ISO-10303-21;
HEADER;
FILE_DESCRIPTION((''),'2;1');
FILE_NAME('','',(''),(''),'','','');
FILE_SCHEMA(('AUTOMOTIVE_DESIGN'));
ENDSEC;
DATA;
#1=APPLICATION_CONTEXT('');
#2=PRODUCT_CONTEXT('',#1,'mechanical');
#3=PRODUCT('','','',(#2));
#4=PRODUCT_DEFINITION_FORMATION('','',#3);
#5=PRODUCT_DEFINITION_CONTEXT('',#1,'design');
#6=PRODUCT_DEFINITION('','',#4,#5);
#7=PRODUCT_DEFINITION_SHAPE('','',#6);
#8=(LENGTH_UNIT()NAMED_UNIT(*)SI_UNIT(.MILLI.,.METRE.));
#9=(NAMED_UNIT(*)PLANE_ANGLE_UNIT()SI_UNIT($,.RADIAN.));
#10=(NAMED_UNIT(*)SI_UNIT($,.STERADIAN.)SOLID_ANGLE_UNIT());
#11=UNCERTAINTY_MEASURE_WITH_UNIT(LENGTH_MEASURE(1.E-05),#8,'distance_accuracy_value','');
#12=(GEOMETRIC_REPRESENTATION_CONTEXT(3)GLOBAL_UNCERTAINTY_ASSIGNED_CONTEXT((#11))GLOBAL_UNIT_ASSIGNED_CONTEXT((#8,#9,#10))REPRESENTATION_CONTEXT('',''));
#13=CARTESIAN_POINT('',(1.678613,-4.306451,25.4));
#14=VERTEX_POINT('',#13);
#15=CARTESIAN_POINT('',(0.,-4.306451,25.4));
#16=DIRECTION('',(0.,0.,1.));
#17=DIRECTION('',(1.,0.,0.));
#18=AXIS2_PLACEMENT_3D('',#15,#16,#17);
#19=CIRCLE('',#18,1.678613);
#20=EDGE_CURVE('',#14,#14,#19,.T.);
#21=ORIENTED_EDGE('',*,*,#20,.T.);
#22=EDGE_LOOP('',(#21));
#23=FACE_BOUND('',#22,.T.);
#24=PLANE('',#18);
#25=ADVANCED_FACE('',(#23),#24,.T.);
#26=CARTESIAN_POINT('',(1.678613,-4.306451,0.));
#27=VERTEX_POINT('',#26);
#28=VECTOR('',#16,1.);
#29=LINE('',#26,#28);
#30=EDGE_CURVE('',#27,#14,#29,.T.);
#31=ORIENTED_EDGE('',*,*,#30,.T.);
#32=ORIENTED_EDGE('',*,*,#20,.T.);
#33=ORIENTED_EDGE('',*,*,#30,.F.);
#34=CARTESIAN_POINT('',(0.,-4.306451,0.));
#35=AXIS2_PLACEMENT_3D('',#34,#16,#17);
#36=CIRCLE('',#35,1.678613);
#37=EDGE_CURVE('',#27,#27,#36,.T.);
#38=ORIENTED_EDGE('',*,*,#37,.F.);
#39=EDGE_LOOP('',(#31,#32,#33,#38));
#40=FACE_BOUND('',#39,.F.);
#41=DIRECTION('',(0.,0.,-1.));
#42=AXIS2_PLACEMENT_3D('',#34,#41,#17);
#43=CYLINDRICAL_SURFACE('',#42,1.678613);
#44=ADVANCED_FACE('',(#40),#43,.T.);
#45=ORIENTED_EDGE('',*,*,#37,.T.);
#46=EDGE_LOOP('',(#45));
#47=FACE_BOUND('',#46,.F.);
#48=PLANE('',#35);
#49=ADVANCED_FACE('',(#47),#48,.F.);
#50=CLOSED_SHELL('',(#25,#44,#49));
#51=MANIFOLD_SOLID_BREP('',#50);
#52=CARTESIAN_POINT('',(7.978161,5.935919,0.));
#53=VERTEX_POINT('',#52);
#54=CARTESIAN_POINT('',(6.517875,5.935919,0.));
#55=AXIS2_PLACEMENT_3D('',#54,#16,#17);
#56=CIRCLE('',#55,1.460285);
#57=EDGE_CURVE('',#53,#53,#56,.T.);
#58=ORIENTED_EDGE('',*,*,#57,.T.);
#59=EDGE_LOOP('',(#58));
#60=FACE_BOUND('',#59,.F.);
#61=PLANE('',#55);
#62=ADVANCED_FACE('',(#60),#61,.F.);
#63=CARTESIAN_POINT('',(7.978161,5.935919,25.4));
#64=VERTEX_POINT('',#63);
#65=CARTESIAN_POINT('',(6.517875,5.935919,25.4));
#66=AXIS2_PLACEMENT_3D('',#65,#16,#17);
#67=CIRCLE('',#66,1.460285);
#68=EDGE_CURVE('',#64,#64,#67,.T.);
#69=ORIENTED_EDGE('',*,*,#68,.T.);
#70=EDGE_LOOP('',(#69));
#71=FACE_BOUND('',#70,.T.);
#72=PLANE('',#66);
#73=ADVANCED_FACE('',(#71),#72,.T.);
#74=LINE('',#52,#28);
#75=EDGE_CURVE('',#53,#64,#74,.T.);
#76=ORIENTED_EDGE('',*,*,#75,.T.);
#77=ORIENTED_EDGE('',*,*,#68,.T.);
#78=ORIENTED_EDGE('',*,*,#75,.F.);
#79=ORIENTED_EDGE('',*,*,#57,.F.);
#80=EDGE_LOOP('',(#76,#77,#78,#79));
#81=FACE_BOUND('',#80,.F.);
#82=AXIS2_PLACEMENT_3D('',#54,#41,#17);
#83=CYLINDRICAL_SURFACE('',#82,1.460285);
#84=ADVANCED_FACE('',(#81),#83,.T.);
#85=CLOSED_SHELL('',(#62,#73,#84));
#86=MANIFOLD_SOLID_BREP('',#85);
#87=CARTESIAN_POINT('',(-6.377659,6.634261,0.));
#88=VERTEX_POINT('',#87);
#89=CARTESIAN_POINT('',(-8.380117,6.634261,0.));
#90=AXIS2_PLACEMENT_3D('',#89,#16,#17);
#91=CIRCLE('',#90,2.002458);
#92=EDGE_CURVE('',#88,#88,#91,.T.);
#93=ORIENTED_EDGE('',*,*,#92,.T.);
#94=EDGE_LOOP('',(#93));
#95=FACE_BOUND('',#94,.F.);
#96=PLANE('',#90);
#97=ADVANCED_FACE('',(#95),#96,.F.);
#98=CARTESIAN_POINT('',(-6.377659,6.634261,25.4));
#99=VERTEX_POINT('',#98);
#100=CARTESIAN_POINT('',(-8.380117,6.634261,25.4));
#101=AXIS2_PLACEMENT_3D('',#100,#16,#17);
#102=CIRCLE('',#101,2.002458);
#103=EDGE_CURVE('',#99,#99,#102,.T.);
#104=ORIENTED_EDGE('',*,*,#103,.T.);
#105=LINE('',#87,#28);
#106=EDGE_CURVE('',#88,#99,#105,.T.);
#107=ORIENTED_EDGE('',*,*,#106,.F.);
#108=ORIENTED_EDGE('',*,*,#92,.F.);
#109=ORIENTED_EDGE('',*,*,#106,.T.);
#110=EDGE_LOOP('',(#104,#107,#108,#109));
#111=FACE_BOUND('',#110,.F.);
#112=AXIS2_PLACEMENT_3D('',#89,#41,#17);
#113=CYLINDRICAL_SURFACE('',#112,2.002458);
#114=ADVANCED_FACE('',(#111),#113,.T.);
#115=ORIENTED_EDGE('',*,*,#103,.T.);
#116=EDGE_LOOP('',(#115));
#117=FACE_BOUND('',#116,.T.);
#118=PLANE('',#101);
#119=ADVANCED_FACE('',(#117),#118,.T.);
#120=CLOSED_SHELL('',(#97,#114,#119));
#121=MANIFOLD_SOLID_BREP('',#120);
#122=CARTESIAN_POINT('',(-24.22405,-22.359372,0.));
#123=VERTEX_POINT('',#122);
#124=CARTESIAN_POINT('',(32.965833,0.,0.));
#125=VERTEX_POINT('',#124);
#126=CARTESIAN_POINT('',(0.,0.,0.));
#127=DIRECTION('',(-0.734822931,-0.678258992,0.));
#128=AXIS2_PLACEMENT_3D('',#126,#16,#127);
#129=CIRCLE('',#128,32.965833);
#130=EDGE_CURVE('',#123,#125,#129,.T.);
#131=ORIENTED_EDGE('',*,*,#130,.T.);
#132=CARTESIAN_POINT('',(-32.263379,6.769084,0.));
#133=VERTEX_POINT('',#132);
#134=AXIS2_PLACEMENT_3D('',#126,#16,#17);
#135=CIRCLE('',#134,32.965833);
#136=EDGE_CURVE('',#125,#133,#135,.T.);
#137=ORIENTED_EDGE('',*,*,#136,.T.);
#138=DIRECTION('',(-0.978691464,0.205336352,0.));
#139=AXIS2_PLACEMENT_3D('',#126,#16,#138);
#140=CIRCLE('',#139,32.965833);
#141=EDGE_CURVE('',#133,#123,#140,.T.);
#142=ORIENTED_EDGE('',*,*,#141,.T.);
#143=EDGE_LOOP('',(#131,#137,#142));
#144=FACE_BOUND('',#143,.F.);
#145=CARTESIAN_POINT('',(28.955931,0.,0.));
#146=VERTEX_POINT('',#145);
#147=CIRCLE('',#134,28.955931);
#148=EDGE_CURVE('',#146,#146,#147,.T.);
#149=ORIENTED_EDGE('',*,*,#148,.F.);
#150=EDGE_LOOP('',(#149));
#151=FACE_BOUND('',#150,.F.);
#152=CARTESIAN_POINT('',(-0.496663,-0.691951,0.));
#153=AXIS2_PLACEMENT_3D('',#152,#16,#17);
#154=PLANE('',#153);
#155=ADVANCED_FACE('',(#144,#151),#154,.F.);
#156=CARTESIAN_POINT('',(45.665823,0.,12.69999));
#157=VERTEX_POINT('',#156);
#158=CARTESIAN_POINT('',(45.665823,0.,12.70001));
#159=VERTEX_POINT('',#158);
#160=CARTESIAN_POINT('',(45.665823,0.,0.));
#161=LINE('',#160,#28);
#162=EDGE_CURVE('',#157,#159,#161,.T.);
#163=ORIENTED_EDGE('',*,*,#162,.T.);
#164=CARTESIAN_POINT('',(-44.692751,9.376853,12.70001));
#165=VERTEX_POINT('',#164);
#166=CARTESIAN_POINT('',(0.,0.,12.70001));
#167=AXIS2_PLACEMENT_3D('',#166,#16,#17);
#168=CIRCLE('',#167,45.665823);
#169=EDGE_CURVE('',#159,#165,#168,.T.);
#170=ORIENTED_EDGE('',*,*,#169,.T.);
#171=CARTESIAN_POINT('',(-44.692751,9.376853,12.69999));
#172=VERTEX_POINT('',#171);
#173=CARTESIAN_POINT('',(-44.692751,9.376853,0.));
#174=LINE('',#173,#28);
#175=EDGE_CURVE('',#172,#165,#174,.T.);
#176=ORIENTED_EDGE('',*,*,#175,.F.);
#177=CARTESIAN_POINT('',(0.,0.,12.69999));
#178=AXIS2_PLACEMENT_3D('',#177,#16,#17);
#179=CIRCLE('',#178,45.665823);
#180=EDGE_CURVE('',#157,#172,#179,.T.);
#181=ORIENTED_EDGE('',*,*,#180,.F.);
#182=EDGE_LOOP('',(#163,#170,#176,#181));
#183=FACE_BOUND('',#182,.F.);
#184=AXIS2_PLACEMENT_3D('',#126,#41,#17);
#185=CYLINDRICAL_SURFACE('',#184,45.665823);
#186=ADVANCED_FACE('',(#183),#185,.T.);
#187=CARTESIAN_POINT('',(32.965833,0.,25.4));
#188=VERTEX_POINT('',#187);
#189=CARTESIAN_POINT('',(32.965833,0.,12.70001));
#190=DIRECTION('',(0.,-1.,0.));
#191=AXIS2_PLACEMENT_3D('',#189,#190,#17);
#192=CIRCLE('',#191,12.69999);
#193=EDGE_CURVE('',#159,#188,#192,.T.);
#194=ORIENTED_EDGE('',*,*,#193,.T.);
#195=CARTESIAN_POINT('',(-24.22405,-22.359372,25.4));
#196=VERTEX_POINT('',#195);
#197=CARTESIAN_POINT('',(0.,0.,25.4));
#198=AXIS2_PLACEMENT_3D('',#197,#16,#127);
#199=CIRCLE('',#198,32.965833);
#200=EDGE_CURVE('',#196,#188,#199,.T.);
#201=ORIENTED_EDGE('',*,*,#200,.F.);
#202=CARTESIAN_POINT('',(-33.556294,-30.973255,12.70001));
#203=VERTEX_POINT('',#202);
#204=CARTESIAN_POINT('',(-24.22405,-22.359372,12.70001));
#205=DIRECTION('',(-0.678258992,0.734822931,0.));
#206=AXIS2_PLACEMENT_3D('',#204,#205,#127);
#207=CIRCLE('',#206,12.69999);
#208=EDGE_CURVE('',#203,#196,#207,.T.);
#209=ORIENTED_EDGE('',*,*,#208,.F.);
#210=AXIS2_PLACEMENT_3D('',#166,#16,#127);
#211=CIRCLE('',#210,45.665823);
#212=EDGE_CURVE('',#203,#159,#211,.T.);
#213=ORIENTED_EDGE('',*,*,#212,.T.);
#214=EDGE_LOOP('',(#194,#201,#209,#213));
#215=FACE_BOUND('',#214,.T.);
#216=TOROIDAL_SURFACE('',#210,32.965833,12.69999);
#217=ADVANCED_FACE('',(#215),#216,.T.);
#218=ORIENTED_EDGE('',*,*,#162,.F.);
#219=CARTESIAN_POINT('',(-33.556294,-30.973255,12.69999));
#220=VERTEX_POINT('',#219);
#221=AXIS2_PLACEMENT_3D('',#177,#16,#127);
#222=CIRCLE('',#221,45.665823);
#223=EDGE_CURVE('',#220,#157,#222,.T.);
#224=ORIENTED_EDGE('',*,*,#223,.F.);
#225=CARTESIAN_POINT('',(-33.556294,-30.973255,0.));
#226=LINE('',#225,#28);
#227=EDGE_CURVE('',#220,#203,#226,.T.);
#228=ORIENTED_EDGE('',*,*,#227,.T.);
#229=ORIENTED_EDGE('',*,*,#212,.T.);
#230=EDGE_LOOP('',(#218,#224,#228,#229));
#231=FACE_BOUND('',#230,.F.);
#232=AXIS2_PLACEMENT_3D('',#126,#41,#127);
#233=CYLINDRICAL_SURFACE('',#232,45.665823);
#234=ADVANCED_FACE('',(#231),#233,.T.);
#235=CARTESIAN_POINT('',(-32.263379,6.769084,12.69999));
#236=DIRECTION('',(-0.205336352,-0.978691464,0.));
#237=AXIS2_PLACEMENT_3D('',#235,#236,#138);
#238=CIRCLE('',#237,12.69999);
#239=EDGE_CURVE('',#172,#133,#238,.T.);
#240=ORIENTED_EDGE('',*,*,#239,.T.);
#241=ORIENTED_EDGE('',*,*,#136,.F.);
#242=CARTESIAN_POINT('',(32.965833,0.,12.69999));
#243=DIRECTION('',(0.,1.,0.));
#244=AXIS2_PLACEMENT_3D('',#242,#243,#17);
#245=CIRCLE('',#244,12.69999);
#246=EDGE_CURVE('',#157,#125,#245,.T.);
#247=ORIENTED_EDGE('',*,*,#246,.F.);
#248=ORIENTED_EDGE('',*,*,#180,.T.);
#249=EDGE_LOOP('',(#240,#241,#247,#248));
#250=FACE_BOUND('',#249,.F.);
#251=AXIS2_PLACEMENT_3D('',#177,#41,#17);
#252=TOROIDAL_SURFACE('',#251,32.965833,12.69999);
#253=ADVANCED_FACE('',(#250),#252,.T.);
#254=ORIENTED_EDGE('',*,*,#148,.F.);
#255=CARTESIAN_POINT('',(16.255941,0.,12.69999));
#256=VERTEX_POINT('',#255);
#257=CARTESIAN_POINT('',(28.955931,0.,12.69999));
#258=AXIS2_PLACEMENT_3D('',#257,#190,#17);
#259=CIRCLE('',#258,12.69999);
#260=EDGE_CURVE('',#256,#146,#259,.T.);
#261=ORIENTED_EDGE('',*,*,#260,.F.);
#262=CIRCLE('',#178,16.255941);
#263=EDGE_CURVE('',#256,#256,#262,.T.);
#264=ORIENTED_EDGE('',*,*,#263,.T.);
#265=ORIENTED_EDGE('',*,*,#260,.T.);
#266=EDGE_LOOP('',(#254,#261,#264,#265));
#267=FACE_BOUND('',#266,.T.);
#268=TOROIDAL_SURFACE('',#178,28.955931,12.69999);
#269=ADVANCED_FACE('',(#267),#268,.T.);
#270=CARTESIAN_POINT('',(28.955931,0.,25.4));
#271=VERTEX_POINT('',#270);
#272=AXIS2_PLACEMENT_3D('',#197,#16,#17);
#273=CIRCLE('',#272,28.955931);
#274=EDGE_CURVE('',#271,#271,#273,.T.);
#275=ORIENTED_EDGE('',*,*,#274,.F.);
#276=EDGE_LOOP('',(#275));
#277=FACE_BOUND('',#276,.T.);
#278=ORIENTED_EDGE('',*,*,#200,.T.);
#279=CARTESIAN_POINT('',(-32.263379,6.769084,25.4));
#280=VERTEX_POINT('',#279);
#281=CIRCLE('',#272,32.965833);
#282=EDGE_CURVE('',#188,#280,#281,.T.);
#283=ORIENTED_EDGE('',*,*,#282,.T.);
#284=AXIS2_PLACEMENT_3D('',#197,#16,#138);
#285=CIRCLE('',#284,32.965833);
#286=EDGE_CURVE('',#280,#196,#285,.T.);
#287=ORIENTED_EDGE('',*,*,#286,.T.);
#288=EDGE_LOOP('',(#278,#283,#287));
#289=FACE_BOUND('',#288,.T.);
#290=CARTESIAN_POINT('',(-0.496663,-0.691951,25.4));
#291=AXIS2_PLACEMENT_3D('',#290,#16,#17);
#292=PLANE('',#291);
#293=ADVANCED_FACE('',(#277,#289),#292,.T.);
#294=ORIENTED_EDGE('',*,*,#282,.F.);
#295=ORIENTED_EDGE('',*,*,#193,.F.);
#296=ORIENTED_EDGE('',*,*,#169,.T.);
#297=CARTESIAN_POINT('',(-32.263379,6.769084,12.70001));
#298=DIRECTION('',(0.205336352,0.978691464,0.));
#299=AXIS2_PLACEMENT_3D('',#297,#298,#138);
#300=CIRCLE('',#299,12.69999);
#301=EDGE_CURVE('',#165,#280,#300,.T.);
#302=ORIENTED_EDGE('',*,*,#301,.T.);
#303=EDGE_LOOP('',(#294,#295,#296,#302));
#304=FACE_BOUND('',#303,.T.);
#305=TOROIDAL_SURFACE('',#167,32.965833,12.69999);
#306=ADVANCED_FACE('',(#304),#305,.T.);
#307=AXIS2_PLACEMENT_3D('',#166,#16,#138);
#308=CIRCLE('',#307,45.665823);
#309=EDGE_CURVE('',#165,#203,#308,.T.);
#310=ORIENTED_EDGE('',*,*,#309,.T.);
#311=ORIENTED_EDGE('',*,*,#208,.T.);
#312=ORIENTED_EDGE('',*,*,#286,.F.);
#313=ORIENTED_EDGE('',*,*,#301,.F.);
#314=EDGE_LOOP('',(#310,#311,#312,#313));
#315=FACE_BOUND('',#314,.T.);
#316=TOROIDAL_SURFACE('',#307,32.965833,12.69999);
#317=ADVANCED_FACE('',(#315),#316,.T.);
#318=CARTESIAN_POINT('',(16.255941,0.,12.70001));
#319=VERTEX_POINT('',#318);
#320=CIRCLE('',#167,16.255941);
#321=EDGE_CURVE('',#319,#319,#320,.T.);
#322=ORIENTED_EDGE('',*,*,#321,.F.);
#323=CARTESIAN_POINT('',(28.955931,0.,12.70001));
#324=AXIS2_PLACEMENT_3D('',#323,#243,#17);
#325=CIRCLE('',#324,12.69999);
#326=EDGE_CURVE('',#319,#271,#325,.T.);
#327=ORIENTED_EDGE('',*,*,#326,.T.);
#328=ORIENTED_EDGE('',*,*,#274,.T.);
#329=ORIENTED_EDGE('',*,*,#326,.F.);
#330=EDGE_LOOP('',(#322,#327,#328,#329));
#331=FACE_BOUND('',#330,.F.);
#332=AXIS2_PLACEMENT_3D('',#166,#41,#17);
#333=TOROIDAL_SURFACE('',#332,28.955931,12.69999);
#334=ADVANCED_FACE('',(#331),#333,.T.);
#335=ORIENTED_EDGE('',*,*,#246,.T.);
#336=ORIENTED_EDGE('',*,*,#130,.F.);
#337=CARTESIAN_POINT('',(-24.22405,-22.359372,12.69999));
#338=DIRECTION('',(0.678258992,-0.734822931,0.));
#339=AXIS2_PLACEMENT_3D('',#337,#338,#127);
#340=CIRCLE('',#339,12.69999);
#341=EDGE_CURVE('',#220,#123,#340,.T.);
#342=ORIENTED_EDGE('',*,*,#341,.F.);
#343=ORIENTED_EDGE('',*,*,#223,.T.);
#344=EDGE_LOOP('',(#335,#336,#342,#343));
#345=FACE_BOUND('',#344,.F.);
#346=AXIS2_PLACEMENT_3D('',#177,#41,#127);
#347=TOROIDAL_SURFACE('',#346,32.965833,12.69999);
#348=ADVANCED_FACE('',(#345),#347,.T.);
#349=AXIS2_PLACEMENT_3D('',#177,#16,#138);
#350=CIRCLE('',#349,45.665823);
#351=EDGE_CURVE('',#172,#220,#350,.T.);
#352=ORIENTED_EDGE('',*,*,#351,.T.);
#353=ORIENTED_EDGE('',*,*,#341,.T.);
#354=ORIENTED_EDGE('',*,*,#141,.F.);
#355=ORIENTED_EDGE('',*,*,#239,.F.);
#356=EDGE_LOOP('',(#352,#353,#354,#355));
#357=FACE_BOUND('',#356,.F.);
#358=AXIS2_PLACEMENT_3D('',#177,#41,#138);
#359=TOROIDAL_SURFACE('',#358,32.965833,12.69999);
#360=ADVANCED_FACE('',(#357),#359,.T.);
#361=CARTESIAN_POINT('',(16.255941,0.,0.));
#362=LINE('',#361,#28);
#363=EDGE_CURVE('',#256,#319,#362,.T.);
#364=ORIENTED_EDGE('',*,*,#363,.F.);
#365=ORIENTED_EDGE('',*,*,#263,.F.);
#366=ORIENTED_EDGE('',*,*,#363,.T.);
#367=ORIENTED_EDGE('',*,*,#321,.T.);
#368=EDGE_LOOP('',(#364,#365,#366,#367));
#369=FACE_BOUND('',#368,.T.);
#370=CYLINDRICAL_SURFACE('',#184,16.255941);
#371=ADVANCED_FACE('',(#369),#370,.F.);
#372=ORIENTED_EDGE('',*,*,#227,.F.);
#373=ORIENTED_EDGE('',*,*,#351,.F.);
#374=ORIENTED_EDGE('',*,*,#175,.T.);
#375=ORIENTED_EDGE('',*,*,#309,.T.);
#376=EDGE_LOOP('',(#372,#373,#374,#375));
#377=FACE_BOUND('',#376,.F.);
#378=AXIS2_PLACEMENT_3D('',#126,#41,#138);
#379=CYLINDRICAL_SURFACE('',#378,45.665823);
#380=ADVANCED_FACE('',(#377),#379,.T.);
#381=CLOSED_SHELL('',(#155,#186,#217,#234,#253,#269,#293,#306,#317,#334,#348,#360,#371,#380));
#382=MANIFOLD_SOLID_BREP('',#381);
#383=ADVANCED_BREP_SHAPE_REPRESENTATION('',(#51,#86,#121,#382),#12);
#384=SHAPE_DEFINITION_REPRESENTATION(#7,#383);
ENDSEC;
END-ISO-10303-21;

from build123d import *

# Parameters (mm, degrees)
F0_R     = 16.2559412927
F1_DEPTH = 25.4
F0_R_2   = 1.6786130333
F0_R_3   = 2.0024582602
F0_R_4   = 1.4602850905
F2_R     = 12.69999


# Not quite as in the source:
# - a fillet or chamfer is up to 0.001 mm smaller than in the source, because OpenCascade refuses the exact size


with BuildPart() as f1:
    # F0 (on Top) → F1 (new body)
    with BuildSketch(Plane.XY):
        with BuildLine():
            ThreePointArc((-33.5562936962, -30.9732549017), (16.6281629524, -42.5308307309), (45.6658227324, 0))
            ThreePointArc((45.6658227324, 0), (4.7136039757, 45.421903344), (-44.6927509203, 9.3768534705))
            ThreePointArc((-44.6927509203, 9.3768534705), (-44.0200074655, -12.1493336678), (-33.5562936962, -30.9732549017))
        make_face()
        Circle(F0_R, mode=Mode.SUBTRACT)
    extrude(amount=F1_DEPTH)

    # F2 (radius 12.7 in the source; OpenCascade refuses exactly that, so slightly less here)
    f2_edges = [f1.edges().sort_by_distance(p)[0] for p in [
        (-45.665823, 0, 0),
        (45.665823, 0, 12.7),
        (-45.665823, 0, 25.4),
        (16.255941, 0, 12.7),
        (-16.255941, 0, 0),
        (-16.255941, 0, 25.4),
    ]]
    fillet(f2_edges, radius=F2_R)


with BuildPart() as f1b:
    # F0 (on Top) → F1, piece 2 (new body)
    with BuildSketch(Plane.XY):
        with Locations((0, -4.3064509518)):
            Circle(F0_R_2)
    extrude(amount=F1_DEPTH)


with BuildPart() as f1c:
    # F0 (on Top) → F1, piece 3 (new body)
    with BuildSketch(Plane.XY):
        with Locations((-8.3801168948, 6.6342614591)):
            Circle(F0_R_3)
    extrude(amount=F1_DEPTH)


with BuildPart() as f1d:
    # F0 (on Top) → F1, piece 4 (new body)
    with BuildSketch(Plane.XY):
        with Locations((6.5178754739, 5.9359185398)):
            Circle(F0_R_4)
    extrude(amount=F1_DEPTH)


solid = Compound([f1.part, f1b.part, f1c.part, f1d.part])
